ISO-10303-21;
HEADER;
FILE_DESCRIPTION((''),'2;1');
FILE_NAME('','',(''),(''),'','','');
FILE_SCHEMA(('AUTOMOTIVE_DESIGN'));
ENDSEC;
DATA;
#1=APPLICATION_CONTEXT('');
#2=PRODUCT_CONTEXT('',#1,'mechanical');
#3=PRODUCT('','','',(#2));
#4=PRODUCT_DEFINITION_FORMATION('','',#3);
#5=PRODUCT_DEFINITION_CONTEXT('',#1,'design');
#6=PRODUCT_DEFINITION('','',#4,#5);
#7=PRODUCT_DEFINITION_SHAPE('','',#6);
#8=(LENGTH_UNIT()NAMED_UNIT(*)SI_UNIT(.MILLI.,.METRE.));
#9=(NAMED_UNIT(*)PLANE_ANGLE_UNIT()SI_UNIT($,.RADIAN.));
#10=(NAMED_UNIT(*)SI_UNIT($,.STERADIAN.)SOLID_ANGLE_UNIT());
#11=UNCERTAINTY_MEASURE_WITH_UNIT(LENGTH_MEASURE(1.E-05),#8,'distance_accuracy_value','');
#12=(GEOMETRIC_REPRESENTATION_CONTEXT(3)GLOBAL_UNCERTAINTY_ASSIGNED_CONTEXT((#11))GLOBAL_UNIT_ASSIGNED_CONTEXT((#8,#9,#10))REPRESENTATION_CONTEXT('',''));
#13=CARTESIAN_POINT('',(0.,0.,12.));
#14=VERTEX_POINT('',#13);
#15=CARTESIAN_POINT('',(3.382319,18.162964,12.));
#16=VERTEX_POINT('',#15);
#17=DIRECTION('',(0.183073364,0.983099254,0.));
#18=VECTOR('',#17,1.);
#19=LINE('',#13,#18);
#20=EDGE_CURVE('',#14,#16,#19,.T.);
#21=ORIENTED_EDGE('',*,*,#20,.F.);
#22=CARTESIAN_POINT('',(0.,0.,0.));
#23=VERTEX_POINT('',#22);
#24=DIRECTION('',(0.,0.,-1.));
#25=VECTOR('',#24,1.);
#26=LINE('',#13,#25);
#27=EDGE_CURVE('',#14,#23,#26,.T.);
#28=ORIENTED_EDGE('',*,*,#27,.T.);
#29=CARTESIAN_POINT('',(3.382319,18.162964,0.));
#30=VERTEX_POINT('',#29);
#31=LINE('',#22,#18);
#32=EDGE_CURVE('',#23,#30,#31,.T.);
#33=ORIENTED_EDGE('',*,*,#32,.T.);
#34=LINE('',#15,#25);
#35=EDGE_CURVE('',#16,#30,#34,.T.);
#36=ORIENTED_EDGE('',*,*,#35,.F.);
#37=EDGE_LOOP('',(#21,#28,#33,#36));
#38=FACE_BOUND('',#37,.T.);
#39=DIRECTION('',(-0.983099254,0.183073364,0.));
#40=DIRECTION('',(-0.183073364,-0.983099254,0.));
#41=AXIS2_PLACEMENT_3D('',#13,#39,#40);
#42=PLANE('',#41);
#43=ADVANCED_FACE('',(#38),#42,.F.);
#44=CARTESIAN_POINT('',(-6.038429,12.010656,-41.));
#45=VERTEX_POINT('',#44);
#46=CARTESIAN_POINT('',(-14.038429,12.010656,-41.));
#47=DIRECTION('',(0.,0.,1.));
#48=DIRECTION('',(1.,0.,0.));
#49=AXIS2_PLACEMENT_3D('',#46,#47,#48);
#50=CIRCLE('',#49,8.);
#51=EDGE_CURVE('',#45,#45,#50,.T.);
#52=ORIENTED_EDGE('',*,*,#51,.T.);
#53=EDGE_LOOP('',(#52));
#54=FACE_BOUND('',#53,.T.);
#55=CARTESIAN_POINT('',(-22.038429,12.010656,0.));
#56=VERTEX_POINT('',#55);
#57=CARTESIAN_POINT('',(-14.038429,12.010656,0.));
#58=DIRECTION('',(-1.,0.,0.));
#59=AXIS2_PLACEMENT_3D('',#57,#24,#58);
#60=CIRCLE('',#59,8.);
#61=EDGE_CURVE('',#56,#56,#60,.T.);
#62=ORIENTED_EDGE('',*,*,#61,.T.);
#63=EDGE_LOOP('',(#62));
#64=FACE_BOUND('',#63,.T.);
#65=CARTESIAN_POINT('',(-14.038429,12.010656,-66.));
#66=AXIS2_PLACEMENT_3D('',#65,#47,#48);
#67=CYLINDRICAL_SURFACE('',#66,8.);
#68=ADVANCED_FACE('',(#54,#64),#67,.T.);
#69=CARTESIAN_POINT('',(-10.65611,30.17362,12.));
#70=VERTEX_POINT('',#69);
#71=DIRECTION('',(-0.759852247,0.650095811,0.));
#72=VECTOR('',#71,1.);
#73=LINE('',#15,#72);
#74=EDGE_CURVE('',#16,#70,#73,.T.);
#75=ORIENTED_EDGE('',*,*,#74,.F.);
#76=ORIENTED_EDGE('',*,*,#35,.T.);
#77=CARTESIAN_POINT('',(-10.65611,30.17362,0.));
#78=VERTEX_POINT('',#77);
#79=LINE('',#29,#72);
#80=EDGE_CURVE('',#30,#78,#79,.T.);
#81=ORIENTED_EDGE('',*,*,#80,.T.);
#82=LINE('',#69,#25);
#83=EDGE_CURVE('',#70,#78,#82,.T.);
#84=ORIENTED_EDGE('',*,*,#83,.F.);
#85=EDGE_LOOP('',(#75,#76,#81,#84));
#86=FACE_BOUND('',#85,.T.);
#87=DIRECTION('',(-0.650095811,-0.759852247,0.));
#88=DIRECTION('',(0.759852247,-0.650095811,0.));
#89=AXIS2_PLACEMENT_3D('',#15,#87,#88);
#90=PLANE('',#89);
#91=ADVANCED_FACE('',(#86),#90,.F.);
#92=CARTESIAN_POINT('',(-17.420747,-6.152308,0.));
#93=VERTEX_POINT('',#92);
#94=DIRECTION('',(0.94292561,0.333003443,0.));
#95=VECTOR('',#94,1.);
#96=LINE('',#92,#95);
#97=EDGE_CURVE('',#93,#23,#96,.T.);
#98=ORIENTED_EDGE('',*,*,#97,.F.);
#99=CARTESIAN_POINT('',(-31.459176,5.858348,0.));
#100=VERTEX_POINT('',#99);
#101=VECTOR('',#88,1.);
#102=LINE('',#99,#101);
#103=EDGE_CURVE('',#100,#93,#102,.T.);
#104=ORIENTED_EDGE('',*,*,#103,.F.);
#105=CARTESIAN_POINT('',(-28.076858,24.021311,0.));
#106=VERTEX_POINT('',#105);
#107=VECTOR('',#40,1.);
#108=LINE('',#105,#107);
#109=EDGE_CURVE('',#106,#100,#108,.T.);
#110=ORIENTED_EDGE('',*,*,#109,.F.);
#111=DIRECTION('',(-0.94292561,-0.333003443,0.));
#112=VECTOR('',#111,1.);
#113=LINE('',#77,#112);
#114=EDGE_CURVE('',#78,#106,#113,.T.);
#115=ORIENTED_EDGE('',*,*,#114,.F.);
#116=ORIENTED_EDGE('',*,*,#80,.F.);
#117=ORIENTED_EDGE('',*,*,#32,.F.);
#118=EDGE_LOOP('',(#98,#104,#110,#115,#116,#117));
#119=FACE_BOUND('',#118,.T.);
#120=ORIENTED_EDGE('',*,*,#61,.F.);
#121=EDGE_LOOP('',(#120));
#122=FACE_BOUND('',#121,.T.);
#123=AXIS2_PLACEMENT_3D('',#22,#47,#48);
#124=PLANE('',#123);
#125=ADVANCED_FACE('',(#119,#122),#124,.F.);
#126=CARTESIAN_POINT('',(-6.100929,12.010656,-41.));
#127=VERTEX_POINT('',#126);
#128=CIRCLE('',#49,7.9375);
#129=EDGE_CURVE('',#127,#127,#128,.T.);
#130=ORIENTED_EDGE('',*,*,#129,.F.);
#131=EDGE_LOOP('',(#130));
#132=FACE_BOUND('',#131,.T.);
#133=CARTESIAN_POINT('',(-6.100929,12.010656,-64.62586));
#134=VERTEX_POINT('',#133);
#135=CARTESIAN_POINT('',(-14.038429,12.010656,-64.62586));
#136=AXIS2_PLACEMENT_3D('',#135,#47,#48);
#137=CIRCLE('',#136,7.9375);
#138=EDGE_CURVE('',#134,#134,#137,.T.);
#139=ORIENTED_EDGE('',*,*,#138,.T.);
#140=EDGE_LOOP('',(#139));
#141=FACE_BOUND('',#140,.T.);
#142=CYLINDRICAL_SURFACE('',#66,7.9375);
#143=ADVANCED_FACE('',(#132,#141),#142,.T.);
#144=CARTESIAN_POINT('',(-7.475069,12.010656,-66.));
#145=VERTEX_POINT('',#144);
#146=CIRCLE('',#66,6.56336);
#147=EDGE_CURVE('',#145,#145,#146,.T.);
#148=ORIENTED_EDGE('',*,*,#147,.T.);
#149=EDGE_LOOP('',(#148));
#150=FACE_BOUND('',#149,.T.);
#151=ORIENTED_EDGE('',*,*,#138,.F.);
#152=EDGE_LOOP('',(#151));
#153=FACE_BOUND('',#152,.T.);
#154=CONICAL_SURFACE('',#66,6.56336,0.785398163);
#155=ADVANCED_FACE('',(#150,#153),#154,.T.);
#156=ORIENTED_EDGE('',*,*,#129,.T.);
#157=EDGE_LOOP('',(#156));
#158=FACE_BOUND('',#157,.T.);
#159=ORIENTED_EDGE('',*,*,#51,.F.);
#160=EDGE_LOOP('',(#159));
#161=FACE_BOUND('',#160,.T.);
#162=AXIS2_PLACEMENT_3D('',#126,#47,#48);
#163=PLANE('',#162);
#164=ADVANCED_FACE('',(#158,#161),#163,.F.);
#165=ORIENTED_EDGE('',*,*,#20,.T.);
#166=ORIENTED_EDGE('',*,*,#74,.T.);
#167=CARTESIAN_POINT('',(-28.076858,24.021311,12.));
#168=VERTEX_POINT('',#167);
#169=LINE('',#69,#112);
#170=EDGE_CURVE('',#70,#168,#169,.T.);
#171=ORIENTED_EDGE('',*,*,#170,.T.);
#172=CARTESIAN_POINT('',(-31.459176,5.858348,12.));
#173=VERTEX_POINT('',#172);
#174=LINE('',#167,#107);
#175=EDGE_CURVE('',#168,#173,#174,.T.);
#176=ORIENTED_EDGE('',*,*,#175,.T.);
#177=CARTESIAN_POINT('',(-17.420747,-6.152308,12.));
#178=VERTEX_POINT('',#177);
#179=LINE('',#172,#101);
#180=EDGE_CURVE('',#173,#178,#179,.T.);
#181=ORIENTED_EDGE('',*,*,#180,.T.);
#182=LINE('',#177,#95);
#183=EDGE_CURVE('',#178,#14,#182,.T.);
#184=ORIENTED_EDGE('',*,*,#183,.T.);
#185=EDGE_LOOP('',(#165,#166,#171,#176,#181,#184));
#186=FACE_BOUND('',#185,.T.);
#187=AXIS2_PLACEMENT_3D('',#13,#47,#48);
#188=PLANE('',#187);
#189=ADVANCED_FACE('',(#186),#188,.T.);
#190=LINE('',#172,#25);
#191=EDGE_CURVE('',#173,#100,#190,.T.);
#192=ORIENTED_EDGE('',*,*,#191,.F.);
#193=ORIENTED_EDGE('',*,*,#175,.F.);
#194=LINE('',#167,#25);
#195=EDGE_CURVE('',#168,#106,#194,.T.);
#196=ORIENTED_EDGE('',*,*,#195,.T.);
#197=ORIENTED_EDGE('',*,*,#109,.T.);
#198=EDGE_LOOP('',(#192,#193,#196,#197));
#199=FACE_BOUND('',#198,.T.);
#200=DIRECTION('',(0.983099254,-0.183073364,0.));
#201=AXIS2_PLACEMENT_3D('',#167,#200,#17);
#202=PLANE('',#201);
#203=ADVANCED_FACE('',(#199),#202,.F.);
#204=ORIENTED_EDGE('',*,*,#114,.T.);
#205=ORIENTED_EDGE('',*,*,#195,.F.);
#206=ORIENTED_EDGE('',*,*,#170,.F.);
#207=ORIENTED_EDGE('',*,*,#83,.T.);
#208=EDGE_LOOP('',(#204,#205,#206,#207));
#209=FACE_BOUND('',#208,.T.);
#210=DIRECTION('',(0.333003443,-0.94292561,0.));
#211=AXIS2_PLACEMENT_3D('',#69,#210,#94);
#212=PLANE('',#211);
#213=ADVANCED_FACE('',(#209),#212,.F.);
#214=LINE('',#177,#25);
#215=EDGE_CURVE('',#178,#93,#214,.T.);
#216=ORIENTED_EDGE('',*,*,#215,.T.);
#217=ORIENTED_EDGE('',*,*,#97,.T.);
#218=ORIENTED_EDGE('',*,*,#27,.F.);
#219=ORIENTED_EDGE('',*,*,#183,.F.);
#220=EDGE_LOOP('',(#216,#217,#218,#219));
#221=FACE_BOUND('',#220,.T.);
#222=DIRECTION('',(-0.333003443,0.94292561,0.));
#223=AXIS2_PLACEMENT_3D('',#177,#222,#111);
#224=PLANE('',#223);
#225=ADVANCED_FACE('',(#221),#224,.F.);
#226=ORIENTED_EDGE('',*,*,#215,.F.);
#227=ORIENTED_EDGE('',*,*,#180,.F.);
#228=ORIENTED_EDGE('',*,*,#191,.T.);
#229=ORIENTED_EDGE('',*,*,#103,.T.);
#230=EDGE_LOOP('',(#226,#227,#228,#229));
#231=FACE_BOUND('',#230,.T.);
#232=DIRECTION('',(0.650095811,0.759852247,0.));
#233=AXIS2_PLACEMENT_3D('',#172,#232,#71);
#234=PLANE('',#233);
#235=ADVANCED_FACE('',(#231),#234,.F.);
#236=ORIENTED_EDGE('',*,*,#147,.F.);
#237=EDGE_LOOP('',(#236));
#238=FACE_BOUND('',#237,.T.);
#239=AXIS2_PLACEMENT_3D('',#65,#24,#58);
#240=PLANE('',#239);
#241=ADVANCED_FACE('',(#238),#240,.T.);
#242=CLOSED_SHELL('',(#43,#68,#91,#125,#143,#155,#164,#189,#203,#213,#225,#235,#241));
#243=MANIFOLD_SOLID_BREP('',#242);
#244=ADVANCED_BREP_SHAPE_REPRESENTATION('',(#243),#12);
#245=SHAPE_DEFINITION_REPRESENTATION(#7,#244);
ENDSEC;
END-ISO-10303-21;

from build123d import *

# Parameters (mm, degrees)
BOSS_EXTRUDE1_DEPTH = 12
SKETCH4_R           = 8
BOSS_EXTRUDE3_DEPTH = 66


# Read off the part's stored shape, not the designer's step: 5/8-11 Machine Threads Stud2
with BuildPart() as part:
    # Sketch1 → Boss-Extrude1 (new body)
    with BuildSketch(Plane.XY):
        Polygon((0, 0), (3.38231859, 18.162963808), (-10.656110181, 30.173619534), (-28.076857542, 24.021311453), (-31.459176132, 5.858347645), (-17.420747361, -6.152308082), align=None)
    extrude(amount=BOSS_EXTRUDE1_DEPTH)

    # Sketch4 → Boss-Extrude3 (add)
    with BuildSketch(Plane(origin=(0, 0, 0), x_dir=(-1, 0, 0), z_dir=(0, 0, -1))):
        with Locations((14.038428771, 12.010655726)):
            Circle(SKETCH4_R)
    extrude(amount=BOSS_EXTRUDE3_DEPTH)

    # 5/8-11 Machine Threads Stud2 outline → 5/8-11 Machine Threads Stud2 (revolve, cut)
    with BuildSketch(Plane(origin=(-14.038428771, 12.010655726, 0), x_dir=(1, 0, 0), z_dir=(0, -1, 0))):
        Polygon((6.56336, -66), (8, -66), (8, -41), (7.9375, -41), (7.9375, -64.62586), align=None)
    revolve(axis=Axis((-14.038428771, 12.010655726, 0), (0, 0, 1)), mode=Mode.SUBTRACT)


solid = part.part
